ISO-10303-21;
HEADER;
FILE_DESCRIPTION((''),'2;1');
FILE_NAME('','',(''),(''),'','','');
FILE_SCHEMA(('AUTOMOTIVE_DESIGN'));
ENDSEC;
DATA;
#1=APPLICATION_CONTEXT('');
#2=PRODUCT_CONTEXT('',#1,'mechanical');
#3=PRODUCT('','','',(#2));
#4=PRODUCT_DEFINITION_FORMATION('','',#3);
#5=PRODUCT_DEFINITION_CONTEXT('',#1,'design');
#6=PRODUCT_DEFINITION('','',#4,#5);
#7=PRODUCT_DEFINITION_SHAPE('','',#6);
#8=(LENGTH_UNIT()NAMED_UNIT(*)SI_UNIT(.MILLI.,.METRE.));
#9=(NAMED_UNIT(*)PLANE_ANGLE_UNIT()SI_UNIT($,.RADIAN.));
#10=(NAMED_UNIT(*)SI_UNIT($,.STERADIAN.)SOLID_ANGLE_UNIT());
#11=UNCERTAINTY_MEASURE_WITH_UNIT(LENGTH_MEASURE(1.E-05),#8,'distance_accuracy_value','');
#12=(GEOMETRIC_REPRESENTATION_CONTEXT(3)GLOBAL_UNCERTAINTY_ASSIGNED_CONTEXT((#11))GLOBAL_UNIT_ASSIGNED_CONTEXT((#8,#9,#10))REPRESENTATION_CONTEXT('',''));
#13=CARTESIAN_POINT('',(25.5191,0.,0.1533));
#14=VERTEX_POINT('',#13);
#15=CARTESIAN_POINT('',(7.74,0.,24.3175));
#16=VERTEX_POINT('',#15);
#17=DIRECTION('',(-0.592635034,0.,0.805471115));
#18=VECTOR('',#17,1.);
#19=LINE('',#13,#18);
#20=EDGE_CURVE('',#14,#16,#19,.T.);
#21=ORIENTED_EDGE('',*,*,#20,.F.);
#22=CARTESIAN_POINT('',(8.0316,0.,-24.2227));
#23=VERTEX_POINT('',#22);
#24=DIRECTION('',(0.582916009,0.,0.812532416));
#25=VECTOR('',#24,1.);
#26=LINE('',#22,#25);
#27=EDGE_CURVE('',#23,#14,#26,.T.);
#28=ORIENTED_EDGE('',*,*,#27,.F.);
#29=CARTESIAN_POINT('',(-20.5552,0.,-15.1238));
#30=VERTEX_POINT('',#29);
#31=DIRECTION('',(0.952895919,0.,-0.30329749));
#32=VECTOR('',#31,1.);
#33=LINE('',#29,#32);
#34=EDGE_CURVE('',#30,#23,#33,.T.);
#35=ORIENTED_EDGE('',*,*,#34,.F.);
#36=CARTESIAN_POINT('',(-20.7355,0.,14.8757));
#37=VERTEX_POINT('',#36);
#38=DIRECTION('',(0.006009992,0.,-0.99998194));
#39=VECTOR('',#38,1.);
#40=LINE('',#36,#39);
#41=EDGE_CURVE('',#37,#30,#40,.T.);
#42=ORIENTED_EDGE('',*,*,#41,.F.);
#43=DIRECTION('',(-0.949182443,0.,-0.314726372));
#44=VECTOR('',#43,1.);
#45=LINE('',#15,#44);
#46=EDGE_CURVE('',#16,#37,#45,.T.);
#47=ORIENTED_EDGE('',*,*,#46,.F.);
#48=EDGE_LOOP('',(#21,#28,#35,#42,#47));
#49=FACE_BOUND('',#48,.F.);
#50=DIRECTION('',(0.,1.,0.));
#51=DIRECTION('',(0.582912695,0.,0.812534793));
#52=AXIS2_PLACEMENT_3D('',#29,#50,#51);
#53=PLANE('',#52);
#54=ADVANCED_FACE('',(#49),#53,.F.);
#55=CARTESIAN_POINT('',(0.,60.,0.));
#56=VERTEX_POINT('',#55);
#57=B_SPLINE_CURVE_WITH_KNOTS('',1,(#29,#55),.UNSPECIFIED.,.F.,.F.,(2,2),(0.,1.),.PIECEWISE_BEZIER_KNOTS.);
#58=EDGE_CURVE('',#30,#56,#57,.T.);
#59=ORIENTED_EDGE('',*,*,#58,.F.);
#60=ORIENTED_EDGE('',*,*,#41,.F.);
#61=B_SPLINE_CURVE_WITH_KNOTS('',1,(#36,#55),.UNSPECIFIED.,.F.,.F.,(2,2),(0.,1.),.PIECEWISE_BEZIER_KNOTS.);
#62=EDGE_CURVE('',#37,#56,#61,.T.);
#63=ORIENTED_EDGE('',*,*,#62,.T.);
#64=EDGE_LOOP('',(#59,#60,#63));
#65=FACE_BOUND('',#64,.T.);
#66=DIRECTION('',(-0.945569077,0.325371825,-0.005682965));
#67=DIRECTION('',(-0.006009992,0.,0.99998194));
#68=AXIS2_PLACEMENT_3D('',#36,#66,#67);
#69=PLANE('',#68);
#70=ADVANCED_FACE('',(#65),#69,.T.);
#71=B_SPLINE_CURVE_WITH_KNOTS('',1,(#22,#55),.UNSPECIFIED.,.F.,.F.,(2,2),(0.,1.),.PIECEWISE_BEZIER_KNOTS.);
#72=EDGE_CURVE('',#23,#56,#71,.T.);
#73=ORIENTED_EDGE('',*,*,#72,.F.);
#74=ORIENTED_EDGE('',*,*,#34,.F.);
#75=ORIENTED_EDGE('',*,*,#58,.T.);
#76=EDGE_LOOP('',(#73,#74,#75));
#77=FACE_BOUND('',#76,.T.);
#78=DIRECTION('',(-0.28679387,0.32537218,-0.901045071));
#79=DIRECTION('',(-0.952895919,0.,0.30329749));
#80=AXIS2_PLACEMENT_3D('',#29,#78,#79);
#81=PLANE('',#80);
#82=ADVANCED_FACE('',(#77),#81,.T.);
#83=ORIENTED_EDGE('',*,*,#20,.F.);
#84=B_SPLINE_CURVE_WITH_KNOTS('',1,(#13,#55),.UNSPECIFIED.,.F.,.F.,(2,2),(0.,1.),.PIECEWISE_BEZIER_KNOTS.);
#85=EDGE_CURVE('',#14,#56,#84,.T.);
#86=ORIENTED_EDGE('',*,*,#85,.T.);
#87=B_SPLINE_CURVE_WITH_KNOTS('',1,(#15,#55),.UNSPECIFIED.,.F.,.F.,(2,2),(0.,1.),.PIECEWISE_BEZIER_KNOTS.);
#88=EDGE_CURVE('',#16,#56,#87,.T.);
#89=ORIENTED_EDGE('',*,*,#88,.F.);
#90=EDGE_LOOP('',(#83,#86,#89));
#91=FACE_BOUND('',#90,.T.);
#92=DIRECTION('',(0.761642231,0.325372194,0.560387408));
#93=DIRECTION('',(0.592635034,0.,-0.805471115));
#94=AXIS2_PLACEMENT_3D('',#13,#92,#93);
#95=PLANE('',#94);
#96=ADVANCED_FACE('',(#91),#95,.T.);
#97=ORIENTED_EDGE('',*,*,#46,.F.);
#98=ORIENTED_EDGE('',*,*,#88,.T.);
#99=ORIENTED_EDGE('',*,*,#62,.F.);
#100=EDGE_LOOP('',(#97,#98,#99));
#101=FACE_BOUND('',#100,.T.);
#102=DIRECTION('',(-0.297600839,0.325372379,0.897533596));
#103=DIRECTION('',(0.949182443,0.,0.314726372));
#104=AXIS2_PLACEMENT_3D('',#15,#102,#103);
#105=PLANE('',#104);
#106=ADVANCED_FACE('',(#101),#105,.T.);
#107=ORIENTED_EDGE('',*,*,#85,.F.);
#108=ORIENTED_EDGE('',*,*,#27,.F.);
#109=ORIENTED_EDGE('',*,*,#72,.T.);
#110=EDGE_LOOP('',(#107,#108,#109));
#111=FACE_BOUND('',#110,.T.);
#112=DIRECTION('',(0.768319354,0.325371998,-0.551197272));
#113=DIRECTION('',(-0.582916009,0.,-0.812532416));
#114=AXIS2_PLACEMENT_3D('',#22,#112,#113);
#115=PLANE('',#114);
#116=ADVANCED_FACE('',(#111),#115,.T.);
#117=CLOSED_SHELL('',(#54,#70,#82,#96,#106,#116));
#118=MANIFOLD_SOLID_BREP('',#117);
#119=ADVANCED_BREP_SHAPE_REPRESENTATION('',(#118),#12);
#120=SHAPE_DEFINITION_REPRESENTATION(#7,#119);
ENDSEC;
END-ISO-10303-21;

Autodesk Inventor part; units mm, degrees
ref_plane "YZ Plane" through (0, 0, 0) normal (1, 0, 0) x (0, 1, 0)
ref_plane "XY Plane" through (0, 0, 0) normal (0, 0, 1) x (1, 0, 0)
sketch "Sketch1" plane through (0, 0, 0) normal (0, 1, 0) x (-1, 0, 0)
  line L0 (20.5552, -15.1238) -> (-8.0316, -24.2227)
  line L1 (-8.0316, -24.2227) -> (-25.5191, 0.1533)
  line L2 (-25.5191, 0.1533) -> (-7.74, 24.3175)
  line L3 (-7.74, 24.3175) -> (20.7355, 14.8757)
  line L4 (20.7355, 14.8757) -> (20.5552, -15.1238)
  point P0 (0, 0)
ref_plane "Work Plane1" through (0, 60, 0) normal (0, 1, 0) x (-1, 0, 0)
sketch "Sketch2" plane through (0, 60, 0) normal (0, 1, 0) x (-1, 0, 0)
  point P0 (0, 0)
  point P1 (0, 0)
loft "Loft1" add profiles "Sketch1" section 2 point at (0, 60, 0)
properties part number "smallPart"
